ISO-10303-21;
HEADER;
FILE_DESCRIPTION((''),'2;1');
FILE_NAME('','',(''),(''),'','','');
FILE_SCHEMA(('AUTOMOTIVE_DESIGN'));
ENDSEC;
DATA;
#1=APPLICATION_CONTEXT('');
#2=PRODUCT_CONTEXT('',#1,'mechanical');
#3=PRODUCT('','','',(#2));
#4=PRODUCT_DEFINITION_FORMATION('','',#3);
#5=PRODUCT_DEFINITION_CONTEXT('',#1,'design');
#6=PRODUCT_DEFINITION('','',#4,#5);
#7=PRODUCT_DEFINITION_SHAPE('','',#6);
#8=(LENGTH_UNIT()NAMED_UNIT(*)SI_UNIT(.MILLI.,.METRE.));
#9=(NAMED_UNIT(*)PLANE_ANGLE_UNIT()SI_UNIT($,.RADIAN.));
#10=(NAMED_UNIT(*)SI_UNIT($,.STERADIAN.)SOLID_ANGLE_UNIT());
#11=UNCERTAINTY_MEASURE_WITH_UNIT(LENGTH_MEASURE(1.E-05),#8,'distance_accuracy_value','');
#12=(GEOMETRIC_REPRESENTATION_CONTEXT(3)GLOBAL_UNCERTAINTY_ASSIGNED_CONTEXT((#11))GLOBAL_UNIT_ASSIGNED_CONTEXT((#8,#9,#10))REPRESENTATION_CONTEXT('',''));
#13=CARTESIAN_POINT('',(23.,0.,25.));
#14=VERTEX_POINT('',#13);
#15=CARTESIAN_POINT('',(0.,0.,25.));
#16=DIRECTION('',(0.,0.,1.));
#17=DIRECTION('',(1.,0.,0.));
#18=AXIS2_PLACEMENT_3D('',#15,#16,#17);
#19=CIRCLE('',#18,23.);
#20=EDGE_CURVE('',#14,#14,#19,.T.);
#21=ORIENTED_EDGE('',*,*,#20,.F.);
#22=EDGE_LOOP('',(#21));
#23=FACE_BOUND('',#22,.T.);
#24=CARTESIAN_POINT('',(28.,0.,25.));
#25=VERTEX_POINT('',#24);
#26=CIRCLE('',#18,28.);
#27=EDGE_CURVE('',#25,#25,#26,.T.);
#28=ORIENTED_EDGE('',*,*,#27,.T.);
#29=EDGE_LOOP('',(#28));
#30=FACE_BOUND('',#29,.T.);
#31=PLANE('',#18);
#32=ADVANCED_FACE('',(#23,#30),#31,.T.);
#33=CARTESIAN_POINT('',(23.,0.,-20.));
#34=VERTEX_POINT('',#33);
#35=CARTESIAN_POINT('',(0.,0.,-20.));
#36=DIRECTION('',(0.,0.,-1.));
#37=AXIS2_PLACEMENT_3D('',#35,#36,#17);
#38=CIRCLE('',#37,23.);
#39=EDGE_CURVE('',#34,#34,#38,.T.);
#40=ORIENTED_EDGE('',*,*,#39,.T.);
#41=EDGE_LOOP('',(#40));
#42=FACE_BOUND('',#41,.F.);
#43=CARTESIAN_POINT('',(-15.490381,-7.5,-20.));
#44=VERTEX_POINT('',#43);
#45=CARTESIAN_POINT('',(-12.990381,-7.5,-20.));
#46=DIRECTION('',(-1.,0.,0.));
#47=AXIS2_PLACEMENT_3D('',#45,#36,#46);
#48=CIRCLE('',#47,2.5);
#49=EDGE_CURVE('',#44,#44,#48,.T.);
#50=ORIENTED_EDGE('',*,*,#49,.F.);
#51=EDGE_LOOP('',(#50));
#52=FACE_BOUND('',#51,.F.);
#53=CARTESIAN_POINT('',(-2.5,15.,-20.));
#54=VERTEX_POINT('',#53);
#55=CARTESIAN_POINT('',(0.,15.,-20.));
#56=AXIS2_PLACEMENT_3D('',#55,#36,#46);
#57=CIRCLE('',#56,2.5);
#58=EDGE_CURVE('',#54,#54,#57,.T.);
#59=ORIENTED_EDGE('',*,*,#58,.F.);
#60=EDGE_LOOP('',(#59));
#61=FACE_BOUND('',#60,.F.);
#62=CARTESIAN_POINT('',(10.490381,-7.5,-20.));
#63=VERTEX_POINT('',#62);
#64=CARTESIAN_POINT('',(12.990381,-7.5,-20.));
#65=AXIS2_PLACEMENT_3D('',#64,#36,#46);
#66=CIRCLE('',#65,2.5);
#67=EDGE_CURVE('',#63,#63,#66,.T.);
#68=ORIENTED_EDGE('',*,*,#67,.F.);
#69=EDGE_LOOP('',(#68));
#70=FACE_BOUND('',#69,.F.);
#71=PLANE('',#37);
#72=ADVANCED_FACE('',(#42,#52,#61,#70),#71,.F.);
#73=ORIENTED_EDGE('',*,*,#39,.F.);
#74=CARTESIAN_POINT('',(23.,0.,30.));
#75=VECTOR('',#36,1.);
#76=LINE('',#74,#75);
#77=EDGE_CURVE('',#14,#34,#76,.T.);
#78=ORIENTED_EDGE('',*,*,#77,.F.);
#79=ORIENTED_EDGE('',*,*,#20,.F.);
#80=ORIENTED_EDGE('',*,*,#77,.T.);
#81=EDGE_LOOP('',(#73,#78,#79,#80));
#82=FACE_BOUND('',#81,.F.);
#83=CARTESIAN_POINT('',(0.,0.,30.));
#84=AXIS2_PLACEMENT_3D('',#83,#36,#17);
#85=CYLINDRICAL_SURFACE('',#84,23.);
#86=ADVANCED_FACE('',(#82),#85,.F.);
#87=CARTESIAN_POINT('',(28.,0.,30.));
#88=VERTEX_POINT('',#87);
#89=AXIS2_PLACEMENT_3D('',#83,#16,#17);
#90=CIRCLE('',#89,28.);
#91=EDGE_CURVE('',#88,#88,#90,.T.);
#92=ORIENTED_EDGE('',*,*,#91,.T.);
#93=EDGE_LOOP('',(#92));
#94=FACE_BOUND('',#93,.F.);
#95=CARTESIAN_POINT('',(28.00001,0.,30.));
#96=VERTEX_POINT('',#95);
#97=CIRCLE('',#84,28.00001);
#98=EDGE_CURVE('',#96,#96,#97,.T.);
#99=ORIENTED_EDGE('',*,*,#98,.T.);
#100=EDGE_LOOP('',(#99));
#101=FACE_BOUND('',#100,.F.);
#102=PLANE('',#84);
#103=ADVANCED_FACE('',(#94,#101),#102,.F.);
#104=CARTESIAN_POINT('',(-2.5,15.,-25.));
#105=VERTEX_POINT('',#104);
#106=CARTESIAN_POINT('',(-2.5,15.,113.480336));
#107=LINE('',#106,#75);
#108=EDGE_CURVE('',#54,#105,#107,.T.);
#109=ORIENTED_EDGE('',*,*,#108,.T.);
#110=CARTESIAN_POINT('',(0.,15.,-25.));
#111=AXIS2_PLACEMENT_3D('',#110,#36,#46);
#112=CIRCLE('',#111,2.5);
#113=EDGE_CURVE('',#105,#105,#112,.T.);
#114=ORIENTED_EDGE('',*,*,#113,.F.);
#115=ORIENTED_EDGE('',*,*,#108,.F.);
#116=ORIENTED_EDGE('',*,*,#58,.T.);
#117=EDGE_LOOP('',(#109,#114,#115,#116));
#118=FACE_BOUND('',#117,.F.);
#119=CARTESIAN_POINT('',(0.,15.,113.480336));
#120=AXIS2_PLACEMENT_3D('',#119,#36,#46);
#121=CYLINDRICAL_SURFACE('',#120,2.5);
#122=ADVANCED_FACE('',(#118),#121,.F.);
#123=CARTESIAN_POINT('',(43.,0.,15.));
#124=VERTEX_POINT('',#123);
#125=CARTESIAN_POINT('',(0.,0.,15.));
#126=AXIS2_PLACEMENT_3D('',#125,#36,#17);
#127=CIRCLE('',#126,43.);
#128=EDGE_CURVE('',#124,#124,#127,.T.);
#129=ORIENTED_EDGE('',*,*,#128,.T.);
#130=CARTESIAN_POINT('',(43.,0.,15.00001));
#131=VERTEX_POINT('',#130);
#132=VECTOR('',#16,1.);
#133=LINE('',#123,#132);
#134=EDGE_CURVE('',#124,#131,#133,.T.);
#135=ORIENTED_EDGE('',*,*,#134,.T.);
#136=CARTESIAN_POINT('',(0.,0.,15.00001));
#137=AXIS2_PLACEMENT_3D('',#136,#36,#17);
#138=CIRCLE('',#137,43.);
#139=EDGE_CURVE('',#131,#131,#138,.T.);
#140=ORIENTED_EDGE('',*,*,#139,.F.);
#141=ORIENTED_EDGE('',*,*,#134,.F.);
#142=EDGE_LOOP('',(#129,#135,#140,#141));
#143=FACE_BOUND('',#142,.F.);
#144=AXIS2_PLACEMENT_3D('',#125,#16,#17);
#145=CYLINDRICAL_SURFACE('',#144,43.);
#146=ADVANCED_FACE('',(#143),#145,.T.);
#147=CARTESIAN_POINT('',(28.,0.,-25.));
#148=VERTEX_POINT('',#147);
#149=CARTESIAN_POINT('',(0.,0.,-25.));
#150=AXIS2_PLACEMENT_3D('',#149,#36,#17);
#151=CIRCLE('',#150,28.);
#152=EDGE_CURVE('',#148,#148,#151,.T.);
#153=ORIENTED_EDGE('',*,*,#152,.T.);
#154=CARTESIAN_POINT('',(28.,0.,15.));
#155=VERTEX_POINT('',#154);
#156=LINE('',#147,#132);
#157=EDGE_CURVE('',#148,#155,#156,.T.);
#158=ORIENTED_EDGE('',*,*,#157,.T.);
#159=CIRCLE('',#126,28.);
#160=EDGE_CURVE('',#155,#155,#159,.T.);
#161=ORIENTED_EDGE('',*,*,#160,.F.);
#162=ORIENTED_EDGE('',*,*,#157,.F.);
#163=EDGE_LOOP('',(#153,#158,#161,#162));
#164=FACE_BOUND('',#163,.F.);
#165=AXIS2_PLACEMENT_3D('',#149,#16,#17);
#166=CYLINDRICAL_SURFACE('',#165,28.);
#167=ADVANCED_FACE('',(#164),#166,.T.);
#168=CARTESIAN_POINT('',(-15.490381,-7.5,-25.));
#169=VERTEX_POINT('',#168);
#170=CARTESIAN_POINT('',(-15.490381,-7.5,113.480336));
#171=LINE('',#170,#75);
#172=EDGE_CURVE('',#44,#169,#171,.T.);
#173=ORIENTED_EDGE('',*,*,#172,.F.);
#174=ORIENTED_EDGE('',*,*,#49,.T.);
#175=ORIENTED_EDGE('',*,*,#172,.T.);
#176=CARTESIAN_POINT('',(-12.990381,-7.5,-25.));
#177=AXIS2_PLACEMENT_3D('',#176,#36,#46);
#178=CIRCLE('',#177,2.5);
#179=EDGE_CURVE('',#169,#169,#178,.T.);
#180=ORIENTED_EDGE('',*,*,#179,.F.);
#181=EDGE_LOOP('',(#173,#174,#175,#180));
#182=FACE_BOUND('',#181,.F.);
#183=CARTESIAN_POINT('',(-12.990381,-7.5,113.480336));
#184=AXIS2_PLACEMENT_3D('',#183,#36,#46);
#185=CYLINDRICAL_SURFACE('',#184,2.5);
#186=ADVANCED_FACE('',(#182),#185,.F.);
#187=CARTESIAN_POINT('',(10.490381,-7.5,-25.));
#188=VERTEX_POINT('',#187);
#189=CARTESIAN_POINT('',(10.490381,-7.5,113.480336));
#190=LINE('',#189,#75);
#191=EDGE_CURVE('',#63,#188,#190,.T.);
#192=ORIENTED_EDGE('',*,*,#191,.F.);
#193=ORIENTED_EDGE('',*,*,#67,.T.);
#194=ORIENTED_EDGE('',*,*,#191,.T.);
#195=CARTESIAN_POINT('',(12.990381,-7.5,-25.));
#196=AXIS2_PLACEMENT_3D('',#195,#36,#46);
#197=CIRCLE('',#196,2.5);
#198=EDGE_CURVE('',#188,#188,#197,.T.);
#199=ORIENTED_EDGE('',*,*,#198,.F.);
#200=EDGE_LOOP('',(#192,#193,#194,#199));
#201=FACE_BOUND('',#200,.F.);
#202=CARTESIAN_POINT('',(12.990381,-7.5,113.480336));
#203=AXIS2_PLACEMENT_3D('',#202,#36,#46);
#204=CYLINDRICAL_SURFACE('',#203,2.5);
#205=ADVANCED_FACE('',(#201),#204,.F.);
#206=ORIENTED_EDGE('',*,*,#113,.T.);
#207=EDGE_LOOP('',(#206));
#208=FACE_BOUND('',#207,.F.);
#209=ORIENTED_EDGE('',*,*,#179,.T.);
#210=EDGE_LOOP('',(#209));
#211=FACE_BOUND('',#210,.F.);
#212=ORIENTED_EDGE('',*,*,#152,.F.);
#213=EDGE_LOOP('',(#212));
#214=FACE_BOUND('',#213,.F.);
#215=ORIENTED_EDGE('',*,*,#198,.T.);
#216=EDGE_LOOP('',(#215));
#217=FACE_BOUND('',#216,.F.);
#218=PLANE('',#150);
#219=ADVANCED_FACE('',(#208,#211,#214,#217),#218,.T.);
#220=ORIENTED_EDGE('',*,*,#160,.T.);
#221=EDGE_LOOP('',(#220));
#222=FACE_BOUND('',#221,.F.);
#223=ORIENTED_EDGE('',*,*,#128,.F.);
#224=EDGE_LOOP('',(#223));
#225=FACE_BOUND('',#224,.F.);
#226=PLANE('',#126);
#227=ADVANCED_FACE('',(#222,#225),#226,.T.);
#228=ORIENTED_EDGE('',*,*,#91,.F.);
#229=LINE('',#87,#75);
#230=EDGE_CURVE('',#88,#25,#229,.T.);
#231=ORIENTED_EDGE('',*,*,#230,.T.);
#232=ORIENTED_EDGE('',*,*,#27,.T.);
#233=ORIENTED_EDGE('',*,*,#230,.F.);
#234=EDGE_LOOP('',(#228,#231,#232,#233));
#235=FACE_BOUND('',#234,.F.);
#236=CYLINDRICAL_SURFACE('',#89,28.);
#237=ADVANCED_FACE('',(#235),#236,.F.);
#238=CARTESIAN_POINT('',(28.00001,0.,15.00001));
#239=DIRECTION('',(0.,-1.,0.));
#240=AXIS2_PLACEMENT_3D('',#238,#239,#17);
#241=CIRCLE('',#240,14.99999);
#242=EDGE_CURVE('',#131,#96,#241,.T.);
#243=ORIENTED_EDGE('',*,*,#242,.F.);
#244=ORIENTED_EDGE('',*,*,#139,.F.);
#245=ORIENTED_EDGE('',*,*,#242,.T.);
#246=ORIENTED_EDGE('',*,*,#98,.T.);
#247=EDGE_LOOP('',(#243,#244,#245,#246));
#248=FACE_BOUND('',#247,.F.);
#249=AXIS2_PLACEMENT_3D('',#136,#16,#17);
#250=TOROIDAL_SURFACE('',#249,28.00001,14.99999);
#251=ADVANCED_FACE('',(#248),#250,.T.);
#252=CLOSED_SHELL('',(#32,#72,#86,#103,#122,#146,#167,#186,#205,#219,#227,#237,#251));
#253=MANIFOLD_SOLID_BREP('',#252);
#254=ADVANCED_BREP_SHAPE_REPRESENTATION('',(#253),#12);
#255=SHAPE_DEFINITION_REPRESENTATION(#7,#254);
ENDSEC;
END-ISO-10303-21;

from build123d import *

# Parameters (mm, degrees)
F2_R     = 14.99999
F4_D     = 5
F5_R     = 28
F5_R_2   = 23
F6_DEPTH = 5


# Not quite as in the source:
# - a fillet or chamfer is up to 0.001 mm smaller than in the source, because OpenCascade refuses the exact size


with BuildPart() as f1:
    # F0 (on Front) → F1 (revolve)
    with BuildSketch(Plane.XZ):
        Polygon((43, 15), (43, 30), (23, 30), (23, -20), (0, -20), (0, -25), (28, -25), (28, -15), (28, 15), align=None)
    revolve(axis=Axis((0, 0, -22.5), (0, 0, -1)))

    # F2 (radius 15 in the source; OpenCascade refuses exactly that, so slightly less here)
    f2_edges = [f1.edges().sort_by_distance(p)[0] for p in [
        (-43, 0, 30),
    ]]
    fillet(f2_edges, radius=F2_R)

    # F4 (through all)
    with Locations(Plane.XY.offset(-20)):
        with Locations((0, 15), (-12.9903810568, -7.5), (12.9903810568, -7.5)):
            Hole(F4_D / 2)

    # F5 (on face) → F6 (cut)
    with BuildSketch(Plane.XY.offset(30)):
        Circle(F5_R)
        Circle(F5_R_2, mode=Mode.SUBTRACT)
    extrude(amount=-F6_DEPTH, mode=Mode.SUBTRACT)


solid = f1.part
